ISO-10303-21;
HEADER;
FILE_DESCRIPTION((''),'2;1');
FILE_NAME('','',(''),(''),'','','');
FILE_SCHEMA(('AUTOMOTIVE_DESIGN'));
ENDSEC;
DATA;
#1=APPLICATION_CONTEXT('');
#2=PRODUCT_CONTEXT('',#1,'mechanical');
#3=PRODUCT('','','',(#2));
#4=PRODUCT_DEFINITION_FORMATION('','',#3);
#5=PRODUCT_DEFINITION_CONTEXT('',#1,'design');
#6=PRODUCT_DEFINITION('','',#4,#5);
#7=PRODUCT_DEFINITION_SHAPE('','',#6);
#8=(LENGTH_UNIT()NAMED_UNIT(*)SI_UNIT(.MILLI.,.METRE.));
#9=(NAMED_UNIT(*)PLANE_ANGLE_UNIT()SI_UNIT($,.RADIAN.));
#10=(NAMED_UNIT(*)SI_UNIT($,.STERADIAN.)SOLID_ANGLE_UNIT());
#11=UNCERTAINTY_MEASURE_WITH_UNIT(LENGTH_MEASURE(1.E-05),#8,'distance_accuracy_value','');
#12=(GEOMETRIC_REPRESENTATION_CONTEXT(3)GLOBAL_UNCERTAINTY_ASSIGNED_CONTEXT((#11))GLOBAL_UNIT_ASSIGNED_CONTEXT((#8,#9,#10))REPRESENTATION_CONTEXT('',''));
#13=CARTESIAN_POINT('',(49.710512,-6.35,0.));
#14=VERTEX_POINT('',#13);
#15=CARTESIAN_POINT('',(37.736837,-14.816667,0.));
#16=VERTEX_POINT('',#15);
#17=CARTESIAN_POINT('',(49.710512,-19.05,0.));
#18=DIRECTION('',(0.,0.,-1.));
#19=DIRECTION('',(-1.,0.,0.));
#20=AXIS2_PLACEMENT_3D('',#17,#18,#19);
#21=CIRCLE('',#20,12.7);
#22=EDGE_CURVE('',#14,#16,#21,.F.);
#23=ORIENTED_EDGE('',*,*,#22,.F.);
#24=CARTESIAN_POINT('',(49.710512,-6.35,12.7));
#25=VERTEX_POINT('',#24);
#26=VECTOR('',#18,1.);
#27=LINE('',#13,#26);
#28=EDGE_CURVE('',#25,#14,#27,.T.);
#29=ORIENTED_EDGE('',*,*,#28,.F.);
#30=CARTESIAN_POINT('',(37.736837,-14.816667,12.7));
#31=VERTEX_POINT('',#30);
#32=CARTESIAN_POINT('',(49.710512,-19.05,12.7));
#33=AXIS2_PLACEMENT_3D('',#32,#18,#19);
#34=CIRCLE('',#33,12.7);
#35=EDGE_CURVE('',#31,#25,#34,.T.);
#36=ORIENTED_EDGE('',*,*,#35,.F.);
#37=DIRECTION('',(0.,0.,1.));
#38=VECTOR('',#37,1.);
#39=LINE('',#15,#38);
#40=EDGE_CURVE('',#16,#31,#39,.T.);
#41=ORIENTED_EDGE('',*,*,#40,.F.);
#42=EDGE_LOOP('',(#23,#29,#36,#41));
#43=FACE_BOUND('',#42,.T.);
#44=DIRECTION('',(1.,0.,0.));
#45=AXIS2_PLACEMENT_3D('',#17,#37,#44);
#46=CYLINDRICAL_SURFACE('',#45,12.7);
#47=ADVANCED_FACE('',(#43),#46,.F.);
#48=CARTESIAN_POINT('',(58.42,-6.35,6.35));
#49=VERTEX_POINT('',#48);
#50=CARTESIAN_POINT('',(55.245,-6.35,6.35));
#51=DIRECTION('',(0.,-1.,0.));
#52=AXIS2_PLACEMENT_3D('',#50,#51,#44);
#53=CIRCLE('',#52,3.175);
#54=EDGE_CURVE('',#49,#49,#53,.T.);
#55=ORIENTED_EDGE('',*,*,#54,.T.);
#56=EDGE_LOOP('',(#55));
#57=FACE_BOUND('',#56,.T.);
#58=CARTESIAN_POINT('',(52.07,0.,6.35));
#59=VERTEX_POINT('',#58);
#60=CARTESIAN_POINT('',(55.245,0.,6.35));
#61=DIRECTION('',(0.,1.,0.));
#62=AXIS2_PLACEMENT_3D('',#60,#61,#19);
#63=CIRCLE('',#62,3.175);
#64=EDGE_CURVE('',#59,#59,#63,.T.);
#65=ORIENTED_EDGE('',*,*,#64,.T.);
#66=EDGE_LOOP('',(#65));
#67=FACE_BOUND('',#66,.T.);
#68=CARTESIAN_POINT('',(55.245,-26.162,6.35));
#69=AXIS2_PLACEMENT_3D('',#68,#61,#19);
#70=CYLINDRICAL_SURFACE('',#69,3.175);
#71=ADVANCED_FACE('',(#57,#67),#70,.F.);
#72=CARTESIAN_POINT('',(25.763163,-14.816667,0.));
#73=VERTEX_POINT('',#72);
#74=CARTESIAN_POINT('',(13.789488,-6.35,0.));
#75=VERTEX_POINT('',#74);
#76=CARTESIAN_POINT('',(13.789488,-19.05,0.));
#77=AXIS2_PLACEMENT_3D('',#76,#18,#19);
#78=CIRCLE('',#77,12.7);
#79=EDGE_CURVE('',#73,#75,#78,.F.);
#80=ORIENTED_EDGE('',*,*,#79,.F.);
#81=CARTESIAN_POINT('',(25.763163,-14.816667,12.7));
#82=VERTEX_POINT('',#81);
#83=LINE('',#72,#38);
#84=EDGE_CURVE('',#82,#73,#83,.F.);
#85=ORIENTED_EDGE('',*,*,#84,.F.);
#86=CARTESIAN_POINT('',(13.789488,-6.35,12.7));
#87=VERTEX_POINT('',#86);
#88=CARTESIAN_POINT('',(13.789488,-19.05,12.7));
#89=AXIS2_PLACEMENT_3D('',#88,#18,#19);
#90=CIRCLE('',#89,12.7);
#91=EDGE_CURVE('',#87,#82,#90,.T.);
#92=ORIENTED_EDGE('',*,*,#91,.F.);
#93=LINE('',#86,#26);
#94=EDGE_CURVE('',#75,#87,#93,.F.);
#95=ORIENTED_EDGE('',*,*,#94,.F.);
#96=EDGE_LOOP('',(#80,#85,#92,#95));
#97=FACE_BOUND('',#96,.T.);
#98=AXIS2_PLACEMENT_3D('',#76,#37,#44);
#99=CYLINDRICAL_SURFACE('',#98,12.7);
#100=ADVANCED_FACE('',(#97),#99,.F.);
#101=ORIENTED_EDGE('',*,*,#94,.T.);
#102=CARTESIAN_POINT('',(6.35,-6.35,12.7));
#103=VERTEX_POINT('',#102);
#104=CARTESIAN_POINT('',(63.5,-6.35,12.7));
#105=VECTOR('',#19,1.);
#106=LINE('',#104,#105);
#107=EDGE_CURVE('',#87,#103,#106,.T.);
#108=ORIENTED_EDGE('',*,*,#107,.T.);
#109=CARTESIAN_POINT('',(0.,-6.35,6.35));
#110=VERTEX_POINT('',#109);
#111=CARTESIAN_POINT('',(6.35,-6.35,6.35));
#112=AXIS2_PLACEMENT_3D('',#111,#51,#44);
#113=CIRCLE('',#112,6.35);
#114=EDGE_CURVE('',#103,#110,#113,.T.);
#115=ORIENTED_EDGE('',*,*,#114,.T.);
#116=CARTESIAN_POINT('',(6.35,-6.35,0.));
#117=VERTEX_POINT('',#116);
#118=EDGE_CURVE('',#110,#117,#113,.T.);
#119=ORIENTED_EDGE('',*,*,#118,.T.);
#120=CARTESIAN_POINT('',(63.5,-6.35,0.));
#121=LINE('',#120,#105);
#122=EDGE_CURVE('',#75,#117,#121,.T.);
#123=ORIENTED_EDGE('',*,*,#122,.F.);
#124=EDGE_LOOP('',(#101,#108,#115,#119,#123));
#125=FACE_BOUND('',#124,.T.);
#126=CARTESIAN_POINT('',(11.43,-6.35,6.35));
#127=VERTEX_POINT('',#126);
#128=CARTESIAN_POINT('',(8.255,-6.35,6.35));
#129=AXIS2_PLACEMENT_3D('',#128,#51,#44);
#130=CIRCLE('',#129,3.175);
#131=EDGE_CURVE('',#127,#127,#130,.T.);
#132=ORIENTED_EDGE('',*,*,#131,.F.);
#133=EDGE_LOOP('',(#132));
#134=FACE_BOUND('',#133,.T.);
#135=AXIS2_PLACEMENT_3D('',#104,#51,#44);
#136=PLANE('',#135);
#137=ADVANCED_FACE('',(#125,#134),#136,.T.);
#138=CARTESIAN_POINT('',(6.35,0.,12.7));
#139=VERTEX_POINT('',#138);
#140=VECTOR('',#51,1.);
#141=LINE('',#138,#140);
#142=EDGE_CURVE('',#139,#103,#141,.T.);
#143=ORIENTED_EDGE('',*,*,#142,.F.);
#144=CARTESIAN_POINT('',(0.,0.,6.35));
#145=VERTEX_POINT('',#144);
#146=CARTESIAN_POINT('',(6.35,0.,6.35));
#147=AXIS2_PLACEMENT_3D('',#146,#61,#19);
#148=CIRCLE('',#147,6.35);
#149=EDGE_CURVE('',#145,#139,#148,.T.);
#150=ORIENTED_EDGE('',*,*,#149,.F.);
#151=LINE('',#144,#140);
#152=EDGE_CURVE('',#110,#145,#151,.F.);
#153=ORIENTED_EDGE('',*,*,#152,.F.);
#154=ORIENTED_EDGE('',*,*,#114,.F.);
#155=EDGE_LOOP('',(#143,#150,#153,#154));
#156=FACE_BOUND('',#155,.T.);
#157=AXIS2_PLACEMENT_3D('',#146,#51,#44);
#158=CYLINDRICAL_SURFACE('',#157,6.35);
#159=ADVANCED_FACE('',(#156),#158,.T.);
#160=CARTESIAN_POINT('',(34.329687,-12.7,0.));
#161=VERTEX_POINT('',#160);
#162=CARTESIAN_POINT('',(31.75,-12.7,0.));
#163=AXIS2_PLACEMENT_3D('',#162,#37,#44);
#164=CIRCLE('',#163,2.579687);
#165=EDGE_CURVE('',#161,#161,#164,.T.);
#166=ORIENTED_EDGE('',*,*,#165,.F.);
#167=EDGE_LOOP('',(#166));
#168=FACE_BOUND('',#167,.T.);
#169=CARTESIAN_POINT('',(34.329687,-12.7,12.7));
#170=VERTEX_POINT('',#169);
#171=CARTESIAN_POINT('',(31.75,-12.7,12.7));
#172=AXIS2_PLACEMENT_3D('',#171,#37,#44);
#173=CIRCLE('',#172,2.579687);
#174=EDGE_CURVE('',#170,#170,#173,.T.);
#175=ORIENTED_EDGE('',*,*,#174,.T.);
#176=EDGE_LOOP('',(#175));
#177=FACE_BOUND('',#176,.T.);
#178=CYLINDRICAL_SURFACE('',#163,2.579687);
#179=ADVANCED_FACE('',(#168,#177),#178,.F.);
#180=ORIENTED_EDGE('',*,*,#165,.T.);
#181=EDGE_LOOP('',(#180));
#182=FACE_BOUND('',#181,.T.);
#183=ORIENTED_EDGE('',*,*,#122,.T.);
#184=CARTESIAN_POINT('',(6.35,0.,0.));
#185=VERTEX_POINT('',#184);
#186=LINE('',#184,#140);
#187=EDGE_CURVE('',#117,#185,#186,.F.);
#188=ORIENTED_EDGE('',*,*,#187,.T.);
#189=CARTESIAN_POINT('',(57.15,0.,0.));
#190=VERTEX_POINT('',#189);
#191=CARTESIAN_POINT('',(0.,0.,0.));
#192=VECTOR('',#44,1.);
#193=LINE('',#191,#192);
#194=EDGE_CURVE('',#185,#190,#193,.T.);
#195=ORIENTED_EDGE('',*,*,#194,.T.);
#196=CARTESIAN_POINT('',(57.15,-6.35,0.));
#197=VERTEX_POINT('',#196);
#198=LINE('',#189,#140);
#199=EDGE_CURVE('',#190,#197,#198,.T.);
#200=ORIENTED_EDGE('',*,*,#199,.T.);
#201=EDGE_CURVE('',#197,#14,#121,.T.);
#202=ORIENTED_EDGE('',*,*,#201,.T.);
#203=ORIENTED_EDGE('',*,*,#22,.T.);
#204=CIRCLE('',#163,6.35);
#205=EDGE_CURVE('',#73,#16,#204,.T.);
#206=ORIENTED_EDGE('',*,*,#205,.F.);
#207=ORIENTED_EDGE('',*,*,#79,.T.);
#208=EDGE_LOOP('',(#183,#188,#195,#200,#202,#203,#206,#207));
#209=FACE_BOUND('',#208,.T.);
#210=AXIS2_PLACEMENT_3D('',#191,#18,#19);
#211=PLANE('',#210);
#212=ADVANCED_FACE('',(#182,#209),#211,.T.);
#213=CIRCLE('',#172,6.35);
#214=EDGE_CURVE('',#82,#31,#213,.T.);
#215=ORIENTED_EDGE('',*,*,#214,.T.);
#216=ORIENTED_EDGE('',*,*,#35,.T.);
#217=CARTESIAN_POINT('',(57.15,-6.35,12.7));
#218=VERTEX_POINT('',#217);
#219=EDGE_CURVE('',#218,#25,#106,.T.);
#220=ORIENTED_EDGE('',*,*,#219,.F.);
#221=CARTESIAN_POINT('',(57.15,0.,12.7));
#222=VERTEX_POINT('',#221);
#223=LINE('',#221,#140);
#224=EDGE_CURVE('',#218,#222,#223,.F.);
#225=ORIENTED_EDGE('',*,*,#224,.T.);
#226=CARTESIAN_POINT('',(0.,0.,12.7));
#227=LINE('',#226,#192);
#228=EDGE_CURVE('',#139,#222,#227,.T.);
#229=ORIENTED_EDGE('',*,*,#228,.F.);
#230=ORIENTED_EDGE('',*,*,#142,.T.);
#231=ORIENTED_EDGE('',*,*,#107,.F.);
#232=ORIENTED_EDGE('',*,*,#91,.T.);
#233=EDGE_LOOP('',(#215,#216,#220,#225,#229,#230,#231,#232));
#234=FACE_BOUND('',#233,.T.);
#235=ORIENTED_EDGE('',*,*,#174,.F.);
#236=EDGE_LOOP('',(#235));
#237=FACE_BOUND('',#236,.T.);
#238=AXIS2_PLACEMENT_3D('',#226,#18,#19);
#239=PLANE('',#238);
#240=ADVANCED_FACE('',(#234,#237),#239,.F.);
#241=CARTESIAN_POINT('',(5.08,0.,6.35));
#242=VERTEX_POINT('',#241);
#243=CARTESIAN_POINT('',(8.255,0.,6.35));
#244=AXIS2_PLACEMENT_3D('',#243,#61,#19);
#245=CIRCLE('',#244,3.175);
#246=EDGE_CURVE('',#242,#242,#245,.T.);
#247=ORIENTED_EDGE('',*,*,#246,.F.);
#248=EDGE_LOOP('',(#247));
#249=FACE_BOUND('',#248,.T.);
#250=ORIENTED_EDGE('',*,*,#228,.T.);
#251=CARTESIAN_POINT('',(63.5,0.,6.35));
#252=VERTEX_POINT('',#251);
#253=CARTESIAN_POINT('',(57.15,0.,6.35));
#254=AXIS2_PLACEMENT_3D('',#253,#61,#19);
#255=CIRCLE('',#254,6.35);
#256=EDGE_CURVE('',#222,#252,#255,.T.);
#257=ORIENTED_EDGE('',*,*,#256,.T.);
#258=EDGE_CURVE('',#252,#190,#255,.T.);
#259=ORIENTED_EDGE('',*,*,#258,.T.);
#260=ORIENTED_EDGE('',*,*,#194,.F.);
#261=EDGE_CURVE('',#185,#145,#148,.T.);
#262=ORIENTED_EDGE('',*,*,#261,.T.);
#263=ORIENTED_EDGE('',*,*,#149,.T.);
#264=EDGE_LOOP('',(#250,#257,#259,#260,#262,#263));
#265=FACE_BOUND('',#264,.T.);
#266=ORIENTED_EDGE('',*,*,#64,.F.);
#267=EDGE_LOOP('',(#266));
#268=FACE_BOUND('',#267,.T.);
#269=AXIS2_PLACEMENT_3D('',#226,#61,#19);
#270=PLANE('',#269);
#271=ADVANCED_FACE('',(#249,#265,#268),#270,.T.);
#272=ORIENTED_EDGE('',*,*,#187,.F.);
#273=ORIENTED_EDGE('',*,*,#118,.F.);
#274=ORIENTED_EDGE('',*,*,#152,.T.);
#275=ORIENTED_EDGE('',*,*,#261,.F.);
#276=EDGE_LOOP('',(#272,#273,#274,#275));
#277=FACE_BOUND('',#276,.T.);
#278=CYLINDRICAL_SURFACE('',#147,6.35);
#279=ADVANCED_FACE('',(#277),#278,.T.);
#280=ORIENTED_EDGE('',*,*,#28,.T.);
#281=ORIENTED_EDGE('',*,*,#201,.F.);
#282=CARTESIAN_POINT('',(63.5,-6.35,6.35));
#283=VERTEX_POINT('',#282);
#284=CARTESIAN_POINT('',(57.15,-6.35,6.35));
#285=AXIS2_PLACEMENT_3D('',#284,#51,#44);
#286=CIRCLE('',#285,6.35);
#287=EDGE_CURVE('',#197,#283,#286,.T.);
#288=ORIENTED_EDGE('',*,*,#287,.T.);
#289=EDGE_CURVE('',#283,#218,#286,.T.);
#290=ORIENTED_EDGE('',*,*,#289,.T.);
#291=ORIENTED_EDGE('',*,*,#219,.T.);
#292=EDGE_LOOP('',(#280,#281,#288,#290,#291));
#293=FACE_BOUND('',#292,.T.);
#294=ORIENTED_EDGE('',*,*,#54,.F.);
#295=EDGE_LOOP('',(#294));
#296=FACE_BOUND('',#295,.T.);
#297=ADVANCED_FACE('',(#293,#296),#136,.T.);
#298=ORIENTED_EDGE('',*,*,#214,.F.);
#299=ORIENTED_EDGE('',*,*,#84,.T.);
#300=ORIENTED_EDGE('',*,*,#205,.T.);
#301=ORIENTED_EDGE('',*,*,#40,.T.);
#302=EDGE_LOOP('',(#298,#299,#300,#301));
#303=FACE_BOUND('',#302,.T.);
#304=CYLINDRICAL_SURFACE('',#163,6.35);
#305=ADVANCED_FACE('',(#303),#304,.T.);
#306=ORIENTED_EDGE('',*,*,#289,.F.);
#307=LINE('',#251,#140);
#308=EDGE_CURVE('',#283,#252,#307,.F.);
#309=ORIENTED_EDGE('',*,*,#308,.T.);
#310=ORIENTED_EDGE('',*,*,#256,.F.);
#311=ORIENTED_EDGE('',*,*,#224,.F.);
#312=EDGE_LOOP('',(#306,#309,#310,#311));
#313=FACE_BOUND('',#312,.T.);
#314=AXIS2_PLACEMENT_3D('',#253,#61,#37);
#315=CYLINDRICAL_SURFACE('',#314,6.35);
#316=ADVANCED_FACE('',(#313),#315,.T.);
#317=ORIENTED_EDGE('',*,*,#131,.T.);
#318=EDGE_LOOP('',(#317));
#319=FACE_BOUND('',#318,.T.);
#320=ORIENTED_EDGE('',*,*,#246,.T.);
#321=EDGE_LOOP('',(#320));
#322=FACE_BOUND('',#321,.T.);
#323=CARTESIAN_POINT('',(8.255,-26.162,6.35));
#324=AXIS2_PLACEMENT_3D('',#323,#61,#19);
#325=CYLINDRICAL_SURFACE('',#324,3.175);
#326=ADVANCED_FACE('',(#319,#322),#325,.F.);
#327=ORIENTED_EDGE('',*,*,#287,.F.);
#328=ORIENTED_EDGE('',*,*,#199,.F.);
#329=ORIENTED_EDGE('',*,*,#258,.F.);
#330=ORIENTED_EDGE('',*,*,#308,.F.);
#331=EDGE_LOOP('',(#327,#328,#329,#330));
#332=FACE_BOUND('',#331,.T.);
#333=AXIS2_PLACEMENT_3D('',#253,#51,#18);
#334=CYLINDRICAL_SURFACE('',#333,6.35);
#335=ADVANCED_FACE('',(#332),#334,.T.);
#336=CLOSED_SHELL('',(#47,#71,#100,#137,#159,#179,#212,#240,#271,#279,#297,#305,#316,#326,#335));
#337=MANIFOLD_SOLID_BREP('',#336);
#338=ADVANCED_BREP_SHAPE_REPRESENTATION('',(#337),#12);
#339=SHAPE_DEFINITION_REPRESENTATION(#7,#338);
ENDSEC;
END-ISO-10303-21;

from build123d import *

# Parameters (mm, degrees)
SKETCH1_W           = 63.5
SKETCH1_H           = 6.35
BOSS_EXTRUDE1_DEPTH = 12.7
SKETCH2_R           = 3.175
CUT_EXTRUDE1_DEPTH  = 26.162
FILLET1_R           = 6.35
SKETCH3_R           = 2.5796875
BOSS_EXTRUDE2_DEPTH = 12.7
FILLET2_R           = 12.7


with BuildPart() as part:
    # Sketch1 → Boss-Extrude1 (new body)
    with BuildSketch(Plane.XY):
        with Locations((31.75, -3.175)):
            Rectangle(SKETCH1_W, SKETCH1_H)
    extrude(amount=BOSS_EXTRUDE1_DEPTH)

    # Sketch2 → Cut-Extrude1 (cut)
    with BuildSketch(Plane(origin=(0, 0, 0), x_dir=(1, 0, 0), z_dir=(0, 1, 0))):
        with Locations(Location((8.255, -6.35, 0), (0, 0, 180))):
            Circle(SKETCH2_R)
        with Locations(Location((55.245, -6.35, 0), (0, 0, 180))):
            Circle(SKETCH2_R)
    extrude(amount=-CUT_EXTRUDE1_DEPTH, mode=Mode.SUBTRACT)

    # Fillet1
    fillet1_edges = [part.edges().sort_by_distance(p)[0] for p in [
        (63.5, -3.175, 12.7),
        (63.5, -3.175, 0),
        (0, -3.175, 0),
        (0, -3.175, 12.7),
    ]]
    fillet(fillet1_edges, radius=FILLET1_R - 0.0001)  # a hair under: the kernel refuses the full size

    # Sketch3 → Boss-Extrude2 (add)
    with BuildSketch(Plane.XY.offset(12.7)):
        with BuildLine():
            Line((25.4, -6.35), (38.1, -6.35))
            Line((38.1, -6.35), (38.1, -12.7))
            ThreePointArc((38.1, -12.7), (31.75, -19.05), (25.4, -12.7))
            Line((25.4, -12.7), (25.4, -6.35))
        make_face()
        with Locations((31.75, -12.7)):
            Circle(SKETCH3_R, mode=Mode.SUBTRACT)
    extrude(amount=-BOSS_EXTRUDE2_DEPTH)

    # Fillet2
    fillet2_edges = [part.edges().sort_by_distance(p)[0] for p in [
        (38.1, -6.35, 6.35),
        (25.4, -6.35, 6.35),
    ]]
    fillet(fillet2_edges, radius=FILLET2_R)


solid = part.part
